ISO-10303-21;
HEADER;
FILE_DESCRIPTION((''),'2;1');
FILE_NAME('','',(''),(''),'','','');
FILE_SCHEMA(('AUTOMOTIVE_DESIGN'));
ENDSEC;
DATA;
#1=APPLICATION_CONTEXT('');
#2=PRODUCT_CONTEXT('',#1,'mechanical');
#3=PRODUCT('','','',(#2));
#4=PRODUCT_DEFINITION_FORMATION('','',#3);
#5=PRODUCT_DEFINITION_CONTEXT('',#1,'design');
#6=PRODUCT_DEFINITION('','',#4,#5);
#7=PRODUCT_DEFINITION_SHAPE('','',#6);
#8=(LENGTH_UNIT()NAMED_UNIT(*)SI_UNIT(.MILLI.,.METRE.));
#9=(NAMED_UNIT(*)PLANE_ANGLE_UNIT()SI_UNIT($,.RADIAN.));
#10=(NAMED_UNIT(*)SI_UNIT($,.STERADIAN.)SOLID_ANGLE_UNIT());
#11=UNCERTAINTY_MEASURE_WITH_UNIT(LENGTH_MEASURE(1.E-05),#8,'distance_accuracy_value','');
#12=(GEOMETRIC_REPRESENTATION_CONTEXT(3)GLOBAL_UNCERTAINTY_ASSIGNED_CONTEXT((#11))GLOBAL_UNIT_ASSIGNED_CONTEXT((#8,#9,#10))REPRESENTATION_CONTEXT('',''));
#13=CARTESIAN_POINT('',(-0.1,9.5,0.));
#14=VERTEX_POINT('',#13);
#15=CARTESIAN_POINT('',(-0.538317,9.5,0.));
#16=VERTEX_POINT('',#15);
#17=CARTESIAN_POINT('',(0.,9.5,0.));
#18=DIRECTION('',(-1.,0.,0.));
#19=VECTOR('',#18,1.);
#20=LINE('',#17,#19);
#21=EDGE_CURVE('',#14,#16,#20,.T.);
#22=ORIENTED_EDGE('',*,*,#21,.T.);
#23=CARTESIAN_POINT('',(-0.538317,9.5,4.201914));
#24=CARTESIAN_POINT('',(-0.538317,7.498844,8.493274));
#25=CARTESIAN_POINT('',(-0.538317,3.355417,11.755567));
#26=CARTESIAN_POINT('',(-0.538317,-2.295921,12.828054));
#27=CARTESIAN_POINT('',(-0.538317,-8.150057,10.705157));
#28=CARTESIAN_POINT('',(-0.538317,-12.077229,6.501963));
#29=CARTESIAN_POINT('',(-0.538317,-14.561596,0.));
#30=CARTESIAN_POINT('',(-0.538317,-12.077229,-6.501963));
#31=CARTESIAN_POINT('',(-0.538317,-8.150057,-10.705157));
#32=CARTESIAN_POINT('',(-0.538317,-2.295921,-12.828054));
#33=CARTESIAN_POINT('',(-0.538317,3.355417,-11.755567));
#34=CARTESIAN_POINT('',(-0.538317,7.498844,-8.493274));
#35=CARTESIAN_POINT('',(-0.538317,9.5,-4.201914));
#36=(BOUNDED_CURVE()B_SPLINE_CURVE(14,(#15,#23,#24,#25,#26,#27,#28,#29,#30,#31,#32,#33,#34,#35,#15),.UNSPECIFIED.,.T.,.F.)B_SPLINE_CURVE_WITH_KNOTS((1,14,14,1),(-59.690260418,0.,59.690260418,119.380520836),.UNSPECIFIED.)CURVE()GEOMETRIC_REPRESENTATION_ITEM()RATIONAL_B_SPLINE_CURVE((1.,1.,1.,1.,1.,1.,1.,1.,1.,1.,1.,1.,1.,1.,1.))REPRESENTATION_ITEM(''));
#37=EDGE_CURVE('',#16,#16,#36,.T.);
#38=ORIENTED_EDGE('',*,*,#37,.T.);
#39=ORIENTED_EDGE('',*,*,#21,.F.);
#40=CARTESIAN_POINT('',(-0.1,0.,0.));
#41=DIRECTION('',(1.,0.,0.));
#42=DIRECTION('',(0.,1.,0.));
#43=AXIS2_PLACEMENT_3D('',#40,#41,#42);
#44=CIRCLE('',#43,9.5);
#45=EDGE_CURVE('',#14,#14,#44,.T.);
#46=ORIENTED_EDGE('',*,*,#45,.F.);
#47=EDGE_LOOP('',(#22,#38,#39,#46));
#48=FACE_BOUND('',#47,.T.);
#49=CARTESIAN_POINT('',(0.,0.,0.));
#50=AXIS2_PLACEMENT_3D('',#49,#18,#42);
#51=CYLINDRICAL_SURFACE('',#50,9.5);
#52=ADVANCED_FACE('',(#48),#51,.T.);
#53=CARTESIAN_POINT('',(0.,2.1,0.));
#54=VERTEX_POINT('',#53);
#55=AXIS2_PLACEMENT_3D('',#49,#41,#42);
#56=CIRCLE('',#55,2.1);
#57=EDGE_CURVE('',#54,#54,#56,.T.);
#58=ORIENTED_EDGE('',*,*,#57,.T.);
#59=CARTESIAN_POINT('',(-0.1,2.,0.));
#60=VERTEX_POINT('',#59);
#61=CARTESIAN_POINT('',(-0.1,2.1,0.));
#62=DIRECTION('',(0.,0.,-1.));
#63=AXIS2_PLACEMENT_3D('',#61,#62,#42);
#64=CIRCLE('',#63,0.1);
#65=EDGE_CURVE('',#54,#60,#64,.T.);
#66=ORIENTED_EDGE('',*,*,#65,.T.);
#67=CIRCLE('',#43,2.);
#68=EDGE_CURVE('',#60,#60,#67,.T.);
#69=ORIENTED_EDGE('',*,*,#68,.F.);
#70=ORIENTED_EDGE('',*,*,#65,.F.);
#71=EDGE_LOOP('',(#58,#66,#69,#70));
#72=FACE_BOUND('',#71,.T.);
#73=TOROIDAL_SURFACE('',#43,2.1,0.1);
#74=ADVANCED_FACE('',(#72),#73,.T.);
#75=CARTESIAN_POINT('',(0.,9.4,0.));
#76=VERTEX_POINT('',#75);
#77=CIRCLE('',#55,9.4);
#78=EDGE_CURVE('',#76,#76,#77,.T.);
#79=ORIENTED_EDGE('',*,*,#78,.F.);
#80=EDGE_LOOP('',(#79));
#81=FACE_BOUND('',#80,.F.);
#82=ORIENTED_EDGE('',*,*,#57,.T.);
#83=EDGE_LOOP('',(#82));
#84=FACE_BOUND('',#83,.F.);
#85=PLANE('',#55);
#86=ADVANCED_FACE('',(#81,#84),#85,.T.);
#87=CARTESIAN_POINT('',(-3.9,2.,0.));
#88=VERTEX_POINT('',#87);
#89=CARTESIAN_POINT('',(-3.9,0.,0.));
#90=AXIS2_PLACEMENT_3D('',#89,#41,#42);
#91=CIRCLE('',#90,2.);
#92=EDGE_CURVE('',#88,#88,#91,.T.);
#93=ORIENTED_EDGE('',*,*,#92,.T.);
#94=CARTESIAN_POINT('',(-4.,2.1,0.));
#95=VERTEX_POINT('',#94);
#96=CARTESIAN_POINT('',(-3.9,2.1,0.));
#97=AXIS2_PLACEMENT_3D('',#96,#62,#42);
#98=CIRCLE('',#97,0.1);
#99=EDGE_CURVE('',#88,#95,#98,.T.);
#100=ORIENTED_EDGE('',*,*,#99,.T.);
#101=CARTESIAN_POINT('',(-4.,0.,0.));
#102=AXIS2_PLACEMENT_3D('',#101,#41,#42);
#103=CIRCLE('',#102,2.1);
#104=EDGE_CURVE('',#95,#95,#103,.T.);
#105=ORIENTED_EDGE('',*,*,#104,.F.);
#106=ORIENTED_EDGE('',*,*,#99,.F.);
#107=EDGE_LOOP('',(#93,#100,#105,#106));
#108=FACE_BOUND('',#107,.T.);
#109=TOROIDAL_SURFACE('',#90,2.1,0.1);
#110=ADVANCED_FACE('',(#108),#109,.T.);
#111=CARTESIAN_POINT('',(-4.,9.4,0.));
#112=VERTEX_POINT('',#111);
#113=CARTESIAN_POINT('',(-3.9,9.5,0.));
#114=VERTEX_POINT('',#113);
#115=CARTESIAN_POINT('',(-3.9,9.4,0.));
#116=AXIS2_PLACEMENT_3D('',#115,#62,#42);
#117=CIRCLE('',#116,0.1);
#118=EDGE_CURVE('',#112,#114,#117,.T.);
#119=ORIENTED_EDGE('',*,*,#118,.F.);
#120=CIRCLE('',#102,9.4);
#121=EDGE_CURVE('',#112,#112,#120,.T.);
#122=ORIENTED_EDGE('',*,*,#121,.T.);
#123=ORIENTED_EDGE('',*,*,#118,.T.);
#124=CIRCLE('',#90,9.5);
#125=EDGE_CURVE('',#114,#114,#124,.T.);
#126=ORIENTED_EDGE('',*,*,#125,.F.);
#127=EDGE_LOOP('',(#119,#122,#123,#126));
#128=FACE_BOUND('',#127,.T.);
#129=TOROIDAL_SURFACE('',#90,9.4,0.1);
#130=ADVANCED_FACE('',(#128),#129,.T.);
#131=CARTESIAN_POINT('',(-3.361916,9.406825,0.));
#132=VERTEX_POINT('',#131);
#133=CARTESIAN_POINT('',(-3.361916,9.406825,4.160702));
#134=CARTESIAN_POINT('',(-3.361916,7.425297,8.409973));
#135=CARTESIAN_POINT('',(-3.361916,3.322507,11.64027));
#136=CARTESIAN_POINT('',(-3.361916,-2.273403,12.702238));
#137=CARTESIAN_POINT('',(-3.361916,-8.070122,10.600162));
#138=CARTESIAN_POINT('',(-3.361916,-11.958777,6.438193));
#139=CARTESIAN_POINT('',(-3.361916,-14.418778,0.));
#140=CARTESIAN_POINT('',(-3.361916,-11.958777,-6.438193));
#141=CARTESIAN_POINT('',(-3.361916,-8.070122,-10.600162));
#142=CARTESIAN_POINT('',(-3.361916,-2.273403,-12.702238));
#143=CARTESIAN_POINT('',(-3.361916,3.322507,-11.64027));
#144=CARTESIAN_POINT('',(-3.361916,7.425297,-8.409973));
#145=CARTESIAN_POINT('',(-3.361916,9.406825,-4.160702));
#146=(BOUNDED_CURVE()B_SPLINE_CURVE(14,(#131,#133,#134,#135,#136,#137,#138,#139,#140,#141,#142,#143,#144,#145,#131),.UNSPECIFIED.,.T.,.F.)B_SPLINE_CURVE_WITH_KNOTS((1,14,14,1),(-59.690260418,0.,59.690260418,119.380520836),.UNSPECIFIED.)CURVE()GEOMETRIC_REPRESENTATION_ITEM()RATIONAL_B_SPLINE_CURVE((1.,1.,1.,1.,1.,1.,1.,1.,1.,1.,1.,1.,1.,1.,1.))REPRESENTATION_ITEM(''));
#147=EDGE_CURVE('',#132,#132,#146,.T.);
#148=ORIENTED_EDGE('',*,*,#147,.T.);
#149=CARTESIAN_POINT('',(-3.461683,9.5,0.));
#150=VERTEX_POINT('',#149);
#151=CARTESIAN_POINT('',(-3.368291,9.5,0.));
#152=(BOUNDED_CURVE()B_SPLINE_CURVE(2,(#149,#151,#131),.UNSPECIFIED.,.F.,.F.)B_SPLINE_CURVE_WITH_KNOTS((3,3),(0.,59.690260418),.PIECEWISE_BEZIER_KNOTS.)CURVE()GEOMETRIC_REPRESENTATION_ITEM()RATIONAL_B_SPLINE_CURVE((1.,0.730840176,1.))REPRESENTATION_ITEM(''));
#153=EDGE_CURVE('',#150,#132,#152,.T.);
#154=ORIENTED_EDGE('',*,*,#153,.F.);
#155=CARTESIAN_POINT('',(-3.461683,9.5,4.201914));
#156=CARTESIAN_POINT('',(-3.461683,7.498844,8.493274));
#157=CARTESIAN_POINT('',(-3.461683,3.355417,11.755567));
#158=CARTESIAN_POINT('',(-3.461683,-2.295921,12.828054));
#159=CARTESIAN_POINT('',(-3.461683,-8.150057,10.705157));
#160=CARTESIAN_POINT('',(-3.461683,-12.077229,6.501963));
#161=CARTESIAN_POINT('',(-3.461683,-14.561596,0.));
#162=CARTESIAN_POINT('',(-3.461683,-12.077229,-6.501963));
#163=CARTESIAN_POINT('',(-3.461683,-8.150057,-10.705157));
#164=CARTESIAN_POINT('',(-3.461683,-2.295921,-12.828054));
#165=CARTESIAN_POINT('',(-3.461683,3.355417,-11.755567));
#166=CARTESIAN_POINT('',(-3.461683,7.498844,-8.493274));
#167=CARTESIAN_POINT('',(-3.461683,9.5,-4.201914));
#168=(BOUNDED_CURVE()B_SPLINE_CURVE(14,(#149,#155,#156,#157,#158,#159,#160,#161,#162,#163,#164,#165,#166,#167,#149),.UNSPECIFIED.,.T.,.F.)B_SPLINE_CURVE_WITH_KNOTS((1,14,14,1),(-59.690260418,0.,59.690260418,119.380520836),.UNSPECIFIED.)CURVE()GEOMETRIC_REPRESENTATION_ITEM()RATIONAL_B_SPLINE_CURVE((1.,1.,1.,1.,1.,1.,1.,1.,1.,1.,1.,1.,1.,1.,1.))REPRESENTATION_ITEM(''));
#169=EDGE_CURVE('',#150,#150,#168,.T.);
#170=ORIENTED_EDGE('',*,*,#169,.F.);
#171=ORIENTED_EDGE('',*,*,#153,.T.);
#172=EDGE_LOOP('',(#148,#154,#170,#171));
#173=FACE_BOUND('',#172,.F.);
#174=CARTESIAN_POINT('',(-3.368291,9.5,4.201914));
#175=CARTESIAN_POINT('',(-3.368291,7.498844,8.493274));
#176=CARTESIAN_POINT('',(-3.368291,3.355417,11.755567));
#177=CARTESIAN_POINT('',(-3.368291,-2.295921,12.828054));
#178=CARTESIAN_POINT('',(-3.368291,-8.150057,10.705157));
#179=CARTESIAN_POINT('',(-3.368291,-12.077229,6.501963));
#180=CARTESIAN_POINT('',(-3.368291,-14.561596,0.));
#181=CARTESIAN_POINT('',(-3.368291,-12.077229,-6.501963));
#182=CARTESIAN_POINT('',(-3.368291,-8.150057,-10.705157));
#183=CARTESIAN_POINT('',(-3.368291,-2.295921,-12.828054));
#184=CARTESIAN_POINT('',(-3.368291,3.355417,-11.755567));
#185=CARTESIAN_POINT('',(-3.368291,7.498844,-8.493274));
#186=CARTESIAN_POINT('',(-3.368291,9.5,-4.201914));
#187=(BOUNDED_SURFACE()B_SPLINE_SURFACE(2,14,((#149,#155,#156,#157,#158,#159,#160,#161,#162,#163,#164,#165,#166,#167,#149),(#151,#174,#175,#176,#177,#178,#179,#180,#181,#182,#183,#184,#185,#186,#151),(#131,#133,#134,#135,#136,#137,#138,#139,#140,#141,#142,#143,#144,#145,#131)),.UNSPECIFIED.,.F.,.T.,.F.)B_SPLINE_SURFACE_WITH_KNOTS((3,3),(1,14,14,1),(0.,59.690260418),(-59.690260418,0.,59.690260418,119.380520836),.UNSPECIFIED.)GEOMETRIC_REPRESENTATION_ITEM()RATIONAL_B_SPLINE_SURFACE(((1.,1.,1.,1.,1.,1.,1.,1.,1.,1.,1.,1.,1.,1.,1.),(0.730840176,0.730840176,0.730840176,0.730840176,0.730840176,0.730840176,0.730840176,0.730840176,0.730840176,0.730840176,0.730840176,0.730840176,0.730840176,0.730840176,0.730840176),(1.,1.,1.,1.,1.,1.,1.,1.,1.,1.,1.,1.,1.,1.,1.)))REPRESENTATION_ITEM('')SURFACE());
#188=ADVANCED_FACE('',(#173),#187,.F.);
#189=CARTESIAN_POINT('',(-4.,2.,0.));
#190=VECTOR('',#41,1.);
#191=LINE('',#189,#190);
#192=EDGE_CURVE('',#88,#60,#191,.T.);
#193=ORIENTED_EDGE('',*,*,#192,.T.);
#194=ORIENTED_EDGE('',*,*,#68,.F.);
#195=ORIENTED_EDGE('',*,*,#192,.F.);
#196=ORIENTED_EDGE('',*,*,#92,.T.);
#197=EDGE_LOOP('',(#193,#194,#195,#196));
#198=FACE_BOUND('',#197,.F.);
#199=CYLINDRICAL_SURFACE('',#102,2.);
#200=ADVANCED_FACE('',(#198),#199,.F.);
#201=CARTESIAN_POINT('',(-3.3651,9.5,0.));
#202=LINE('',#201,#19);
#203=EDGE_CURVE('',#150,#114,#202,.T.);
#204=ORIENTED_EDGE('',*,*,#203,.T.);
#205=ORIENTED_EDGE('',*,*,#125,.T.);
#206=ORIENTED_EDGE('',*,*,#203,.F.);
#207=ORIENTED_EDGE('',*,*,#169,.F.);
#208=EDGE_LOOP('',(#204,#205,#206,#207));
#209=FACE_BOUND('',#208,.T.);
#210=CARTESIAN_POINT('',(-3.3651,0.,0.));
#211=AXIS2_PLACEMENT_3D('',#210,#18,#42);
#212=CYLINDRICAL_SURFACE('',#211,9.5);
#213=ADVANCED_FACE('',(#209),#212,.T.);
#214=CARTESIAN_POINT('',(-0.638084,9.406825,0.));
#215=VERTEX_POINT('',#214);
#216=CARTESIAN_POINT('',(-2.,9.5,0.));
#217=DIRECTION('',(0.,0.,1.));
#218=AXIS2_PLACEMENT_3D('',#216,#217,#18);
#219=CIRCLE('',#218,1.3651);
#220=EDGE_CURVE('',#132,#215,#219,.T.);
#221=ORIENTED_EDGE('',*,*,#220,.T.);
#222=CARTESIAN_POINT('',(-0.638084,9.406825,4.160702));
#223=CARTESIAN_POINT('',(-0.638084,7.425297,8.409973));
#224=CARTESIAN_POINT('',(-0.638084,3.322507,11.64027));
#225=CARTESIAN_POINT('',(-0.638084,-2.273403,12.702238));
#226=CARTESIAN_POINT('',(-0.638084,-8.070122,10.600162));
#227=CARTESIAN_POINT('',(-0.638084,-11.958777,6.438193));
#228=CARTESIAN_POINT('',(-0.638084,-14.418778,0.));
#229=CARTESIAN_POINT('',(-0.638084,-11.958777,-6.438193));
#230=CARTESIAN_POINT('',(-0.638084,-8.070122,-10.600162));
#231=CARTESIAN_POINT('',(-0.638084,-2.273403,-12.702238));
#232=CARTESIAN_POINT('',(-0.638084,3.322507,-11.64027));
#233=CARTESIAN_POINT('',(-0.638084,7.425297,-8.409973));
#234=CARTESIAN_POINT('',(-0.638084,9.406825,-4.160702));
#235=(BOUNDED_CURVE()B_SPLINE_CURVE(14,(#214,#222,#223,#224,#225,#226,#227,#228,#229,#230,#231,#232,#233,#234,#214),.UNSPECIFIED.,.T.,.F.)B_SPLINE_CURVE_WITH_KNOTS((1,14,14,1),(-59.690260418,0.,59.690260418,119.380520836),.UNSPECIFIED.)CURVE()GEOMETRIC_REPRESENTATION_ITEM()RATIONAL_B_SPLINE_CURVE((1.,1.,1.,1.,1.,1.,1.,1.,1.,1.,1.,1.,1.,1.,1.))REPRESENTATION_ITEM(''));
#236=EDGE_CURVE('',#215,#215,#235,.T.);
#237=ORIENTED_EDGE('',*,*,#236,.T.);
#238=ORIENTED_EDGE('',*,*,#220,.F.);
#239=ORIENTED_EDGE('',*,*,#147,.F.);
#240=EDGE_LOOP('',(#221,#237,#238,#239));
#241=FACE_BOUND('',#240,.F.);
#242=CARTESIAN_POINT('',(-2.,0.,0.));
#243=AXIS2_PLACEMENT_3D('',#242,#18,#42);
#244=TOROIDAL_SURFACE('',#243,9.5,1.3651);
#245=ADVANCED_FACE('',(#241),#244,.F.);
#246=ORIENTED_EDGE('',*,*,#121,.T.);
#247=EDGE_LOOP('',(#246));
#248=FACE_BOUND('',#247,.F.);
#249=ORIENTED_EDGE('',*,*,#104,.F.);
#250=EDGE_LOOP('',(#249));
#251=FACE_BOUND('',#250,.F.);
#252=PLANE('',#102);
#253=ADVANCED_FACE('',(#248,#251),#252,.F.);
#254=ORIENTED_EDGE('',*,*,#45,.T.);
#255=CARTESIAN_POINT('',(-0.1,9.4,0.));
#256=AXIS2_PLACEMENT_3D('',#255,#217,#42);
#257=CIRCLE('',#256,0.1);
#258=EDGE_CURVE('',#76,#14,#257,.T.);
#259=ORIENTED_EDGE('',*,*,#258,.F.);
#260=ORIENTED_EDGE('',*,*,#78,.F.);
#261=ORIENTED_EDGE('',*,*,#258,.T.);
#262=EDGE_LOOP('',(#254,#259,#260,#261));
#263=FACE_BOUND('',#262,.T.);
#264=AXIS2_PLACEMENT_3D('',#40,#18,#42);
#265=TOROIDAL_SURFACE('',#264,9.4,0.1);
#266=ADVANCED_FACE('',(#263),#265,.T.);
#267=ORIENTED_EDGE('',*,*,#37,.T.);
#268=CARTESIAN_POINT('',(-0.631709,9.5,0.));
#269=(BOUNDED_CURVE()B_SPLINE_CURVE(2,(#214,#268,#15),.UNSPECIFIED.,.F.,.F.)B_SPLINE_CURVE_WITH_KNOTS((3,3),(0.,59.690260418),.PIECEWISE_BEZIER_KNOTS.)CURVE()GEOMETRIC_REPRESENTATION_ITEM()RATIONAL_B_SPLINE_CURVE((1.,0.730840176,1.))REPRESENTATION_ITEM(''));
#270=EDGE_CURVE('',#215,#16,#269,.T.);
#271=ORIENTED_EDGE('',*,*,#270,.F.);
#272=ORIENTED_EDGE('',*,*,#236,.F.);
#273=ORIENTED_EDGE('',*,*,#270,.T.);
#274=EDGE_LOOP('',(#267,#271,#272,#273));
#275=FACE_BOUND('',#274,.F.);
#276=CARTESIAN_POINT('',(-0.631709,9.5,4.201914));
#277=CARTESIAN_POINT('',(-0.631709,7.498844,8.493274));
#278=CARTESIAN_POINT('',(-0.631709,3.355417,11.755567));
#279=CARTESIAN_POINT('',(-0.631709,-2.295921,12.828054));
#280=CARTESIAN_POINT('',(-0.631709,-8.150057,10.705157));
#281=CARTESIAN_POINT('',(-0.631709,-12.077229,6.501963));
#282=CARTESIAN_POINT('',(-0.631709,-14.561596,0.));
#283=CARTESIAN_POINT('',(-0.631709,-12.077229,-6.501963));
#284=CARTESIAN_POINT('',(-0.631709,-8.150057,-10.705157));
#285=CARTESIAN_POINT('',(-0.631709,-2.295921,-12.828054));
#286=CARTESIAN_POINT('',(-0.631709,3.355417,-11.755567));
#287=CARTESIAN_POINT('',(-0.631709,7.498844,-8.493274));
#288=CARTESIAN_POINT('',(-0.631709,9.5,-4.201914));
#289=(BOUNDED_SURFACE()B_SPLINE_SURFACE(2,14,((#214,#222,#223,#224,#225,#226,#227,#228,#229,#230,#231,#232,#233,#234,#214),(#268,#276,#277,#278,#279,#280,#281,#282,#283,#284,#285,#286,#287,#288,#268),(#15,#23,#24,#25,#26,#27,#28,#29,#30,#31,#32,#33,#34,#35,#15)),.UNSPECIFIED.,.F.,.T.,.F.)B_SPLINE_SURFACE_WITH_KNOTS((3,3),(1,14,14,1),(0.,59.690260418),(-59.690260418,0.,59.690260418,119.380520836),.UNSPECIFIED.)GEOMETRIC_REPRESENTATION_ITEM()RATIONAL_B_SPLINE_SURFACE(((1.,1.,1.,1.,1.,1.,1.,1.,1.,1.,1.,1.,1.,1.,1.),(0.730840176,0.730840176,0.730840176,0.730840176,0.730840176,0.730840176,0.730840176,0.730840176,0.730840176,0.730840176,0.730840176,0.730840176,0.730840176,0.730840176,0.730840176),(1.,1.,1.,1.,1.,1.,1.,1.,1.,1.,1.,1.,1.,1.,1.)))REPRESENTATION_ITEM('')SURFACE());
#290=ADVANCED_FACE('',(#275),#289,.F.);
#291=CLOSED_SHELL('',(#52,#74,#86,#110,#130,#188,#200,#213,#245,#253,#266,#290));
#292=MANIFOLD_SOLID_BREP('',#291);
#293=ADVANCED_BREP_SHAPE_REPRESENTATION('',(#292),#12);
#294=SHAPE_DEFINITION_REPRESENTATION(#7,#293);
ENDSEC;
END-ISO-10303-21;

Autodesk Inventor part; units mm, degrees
ref_plane "YZ Plane" through (0, 0, 0) normal (1, 0, 0) x (0, 1, 0)
ref_plane "XZ Plane" through (0, 0, 0) normal (0, 1, 0) x (-1, 0, 0)
ref_plane "XY Plane" through (0, 0, 0) normal (0, 0, 1) x (1, 0, 0)
sketch "Sketch1" plane through (0, 0, 0) normal (0, 0, 1) x (1, 0, 0)
  line L0 (-17.4415, 0) -> (0, 0) construction
  line L1 (0, 9.5) -> (-0.6349, 9.5)
  arc A0 (-3.3651, 9.5) -> (-0.6349, 9.5) centre (-2, 9.5) ccw
  line L2 (-3.3651, 9.5) -> (-4, 9.5)
  line L3 (-2, 9.5) -> (-2, 2.9223) construction
  line L4 (-4, 9.5) -> (-4, 2)
  line L5 (-4, 2) -> (0, 2)
  line L6 (0, 2) -> (0, 9.5)
  dimension "d1" = 4
  dimension "d2" = 19
  dimension "d3" = 1.3651
  dimension "d4" = 4
revolve "Revolution1" add sketch "Sketch1" angle 360 about axis through (-17.4415, 0, 0) along (1, 0, 0)
fillet "Fillet1" radius 0.1 6 edges at (0, -2, 0) (0, -9.5, 0) (-4, -2, 0) (-4, -9.5, 0) (-3.3651, -9.5, 0) (-0.6349, -9.5, 0)
properties part number "Spacer" material "Steel"
